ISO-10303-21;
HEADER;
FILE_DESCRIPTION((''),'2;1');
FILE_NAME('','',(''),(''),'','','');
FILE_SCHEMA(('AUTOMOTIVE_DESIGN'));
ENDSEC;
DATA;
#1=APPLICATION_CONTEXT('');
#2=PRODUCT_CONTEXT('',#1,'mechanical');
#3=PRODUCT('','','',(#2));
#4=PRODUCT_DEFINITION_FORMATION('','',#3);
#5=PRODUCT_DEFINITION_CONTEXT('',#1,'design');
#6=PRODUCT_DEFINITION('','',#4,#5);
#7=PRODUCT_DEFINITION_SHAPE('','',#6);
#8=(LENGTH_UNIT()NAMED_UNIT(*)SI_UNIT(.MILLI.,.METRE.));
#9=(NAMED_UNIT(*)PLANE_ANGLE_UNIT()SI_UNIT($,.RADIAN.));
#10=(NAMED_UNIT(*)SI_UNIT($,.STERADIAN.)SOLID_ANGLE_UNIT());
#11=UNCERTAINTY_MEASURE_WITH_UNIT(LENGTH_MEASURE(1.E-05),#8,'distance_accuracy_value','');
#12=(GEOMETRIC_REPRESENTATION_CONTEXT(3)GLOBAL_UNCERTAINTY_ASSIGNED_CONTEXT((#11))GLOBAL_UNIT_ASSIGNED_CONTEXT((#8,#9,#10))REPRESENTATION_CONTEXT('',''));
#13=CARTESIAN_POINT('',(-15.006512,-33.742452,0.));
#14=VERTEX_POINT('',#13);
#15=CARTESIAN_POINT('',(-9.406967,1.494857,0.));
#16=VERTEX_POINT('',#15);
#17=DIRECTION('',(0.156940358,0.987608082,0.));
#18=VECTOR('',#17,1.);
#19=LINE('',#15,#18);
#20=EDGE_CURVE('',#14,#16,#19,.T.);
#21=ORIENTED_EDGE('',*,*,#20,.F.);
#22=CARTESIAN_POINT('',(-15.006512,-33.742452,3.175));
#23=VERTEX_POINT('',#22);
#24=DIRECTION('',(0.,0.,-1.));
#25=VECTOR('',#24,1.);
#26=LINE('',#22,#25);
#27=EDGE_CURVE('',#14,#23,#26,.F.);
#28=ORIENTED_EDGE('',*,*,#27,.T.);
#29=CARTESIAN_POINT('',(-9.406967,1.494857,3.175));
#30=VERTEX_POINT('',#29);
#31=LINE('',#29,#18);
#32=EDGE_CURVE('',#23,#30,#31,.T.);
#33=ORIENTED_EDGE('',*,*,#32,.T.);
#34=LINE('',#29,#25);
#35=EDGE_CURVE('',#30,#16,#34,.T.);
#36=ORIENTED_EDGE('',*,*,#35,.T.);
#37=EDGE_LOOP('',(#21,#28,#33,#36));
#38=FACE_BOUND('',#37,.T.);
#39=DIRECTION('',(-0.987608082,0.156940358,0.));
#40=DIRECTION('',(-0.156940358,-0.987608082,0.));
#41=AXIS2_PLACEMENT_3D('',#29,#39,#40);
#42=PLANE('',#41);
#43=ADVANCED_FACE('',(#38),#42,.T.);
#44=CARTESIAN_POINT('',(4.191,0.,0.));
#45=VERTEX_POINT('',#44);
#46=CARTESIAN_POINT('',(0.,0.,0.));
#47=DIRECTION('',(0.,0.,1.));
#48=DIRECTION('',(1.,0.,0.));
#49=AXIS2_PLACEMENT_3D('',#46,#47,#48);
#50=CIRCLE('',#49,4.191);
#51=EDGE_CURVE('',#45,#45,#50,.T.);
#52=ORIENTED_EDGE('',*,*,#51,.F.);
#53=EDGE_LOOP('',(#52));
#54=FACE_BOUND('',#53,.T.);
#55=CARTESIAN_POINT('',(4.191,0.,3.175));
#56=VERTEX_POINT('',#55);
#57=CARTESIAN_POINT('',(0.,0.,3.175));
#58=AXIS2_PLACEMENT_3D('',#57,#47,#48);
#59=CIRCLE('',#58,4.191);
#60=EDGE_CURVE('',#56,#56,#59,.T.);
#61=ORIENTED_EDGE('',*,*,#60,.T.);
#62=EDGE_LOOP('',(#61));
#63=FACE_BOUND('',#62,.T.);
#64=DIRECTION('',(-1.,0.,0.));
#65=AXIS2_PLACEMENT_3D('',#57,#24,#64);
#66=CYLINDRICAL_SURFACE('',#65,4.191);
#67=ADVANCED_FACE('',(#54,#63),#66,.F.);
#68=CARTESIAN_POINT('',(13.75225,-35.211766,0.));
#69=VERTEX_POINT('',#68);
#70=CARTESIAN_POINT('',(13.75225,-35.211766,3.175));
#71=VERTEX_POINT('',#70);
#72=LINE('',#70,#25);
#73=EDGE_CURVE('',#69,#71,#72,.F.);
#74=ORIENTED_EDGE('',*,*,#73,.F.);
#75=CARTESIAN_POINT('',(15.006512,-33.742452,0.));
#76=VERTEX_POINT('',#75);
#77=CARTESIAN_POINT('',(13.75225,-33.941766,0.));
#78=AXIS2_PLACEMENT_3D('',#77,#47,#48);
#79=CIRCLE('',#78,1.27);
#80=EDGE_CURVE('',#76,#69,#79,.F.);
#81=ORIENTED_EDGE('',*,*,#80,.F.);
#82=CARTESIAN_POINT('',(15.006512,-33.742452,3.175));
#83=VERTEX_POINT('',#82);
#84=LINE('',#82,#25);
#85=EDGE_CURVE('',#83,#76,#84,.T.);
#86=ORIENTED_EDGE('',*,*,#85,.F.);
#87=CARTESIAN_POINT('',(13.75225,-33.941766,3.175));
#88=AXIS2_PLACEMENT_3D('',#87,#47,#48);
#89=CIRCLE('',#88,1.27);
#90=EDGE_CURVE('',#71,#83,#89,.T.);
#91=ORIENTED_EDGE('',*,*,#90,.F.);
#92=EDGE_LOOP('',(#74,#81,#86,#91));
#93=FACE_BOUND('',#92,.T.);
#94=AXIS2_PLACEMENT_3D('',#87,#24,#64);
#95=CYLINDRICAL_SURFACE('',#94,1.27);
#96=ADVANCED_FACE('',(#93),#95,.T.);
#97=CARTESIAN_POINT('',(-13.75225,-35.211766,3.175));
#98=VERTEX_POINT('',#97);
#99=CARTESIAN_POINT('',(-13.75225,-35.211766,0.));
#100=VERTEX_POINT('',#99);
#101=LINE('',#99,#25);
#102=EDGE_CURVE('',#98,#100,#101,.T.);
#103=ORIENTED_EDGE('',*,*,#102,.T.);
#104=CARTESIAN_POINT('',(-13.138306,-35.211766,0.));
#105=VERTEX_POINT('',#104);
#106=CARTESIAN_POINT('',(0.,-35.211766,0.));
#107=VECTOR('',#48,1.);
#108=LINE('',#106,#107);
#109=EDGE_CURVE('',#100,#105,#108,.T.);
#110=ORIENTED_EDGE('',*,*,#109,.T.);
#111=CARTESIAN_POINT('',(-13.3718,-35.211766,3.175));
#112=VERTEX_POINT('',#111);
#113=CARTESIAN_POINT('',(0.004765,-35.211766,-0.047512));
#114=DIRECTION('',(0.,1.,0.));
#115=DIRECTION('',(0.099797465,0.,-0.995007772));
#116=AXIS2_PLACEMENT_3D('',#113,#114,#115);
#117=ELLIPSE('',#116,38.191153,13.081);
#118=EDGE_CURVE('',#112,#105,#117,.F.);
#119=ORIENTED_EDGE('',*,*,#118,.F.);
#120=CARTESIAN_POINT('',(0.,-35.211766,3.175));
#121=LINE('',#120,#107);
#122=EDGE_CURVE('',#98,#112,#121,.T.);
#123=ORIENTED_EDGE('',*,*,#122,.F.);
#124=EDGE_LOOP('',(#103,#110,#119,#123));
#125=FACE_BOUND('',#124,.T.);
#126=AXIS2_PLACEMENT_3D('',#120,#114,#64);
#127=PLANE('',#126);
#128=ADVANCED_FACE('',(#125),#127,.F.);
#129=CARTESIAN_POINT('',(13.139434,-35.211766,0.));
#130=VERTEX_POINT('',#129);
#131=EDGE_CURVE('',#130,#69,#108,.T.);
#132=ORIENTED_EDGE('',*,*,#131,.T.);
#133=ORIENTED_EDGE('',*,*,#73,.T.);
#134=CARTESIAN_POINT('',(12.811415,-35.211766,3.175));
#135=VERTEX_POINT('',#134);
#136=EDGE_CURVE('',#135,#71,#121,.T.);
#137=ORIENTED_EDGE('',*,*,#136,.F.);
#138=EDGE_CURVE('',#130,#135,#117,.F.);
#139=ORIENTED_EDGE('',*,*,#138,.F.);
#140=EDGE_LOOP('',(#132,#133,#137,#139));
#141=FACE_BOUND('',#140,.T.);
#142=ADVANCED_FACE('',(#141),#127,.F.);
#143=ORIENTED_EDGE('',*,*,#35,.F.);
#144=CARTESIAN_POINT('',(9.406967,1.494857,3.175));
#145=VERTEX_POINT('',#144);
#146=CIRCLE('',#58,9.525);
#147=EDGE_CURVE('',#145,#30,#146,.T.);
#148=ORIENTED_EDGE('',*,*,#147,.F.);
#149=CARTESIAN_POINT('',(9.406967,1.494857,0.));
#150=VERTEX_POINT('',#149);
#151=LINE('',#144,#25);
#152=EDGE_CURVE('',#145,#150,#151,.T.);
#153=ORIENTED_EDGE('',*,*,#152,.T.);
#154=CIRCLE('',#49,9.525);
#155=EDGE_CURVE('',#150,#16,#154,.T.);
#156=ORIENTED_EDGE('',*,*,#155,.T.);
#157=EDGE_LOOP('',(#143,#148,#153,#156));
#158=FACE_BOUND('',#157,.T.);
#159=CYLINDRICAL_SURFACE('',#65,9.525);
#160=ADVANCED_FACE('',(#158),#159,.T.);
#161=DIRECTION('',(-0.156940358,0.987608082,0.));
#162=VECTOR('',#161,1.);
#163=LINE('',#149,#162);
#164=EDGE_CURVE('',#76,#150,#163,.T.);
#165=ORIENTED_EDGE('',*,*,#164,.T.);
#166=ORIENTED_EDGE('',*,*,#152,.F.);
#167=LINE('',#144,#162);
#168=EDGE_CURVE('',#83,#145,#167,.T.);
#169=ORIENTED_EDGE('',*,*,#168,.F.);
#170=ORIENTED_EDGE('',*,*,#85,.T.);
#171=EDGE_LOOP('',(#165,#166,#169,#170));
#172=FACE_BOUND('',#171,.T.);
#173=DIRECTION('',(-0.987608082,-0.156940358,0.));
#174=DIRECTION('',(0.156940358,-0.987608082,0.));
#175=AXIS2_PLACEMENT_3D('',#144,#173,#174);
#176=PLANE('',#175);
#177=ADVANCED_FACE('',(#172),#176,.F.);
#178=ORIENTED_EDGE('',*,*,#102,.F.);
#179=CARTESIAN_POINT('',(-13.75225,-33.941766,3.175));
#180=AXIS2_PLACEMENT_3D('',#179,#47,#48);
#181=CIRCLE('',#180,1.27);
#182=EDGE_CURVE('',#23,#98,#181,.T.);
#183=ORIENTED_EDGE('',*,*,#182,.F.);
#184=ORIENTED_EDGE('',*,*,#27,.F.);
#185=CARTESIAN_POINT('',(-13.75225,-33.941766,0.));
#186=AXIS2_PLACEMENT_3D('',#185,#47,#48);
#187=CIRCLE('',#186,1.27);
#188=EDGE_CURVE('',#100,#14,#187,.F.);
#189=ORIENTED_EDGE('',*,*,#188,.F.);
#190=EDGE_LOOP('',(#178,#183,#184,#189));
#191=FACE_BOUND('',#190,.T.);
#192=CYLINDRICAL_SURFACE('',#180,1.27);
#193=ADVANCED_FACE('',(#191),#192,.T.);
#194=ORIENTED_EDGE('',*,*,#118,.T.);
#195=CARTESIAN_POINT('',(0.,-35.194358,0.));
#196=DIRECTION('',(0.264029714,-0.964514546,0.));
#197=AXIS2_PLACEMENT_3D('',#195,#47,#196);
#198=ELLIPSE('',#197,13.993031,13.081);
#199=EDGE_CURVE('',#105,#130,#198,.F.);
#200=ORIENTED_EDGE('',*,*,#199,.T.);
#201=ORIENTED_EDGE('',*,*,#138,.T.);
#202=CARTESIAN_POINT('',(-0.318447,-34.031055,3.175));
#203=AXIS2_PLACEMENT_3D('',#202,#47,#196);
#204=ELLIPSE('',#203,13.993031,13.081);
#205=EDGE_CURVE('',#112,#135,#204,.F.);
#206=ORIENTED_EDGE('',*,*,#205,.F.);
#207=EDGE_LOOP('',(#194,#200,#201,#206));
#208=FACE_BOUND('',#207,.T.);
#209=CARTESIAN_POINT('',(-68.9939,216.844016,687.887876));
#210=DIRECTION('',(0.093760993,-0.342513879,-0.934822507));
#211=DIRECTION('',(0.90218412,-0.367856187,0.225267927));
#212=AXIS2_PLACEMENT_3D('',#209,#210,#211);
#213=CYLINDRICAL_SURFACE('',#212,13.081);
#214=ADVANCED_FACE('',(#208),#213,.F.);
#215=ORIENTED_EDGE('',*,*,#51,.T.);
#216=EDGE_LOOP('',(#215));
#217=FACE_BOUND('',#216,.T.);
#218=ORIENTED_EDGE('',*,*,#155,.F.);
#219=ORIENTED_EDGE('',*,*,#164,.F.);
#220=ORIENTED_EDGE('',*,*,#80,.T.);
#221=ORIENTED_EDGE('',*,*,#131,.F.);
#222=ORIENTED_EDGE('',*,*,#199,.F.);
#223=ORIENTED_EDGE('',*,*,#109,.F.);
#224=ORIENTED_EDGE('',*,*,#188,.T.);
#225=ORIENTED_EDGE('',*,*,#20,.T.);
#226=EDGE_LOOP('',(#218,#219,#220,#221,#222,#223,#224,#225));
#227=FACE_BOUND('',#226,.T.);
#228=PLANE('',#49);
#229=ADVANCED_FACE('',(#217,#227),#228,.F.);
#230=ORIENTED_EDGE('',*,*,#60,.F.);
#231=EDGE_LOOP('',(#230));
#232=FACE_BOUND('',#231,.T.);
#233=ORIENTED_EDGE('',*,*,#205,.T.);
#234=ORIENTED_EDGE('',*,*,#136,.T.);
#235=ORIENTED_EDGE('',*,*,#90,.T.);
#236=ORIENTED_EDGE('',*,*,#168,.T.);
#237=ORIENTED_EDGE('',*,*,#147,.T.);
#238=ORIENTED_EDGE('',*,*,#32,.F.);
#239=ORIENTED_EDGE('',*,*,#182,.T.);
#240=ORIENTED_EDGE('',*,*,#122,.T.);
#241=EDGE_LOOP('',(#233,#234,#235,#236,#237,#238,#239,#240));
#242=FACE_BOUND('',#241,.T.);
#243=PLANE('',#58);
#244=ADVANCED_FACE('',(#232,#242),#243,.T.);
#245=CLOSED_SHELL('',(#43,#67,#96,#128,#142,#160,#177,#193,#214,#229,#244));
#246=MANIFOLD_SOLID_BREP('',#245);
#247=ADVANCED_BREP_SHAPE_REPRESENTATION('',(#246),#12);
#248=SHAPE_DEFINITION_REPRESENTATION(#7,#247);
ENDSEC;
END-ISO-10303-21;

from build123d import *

# Parameters (mm, degrees)
SKETCH1_R           = 4.191
BOSS_EXTRUDE1_DEPTH = 3.175
CAVITY1_START       = 3.689049998
CAVITY1_DEPTH       = 9.603434939
FILLET3_R           = 1.27


# Read off the part's stored shape, not the designer's step: Cavity1
with BuildPart() as part:
    # Sketch1 → Boss-Extrude1 (new body)
    with BuildSketch(Plane.XY):
        with BuildLine():
            ThreePointArc((9.406966983, 1.494856913), (0, 9.525), (-9.406966983, 1.494856913))
            Line((-9.406966983, 1.494856913), (-15.24, -35.211766))
            Line((-15.24, -35.211766), (15.24, -35.211766))
            Line((15.24, -35.211766), (9.406966983, 1.494856913))
        make_face()
        Circle(SKETCH1_R, mode=Mode.SUBTRACT)
    extrude(amount=BOSS_EXTRUDE1_DEPTH)

    # Cavity1 outline → Cavity1 (cut)
    with BuildSketch(Plane(origin=(0, 0, 0), x_dir=(0.9955947349362284, 0.032256539947670526, 0.08803771576924041), z_dir=(0.09376099278090663, -0.3425138790307331, -0.9348225066311033)).offset(CAVITY1_START)):
        with BuildLine():
            Line((-14.012226084, 36), (-14.169183947, 34.154693399))
            ThreePointArc((-14.169183947, 34.154693399), (-1.135248211, 19.965054491), (11.898687525, 34.154693399))
            Line((11.898687525, 34.154693399), (11.741729662, 36))
            Line((11.741729662, 36), (-14.012226084, 36))
        make_face()
    extrude(amount=CAVITY1_DEPTH, mode=Mode.SUBTRACT)

    # Fillet3
    fillet3_edges = [part.edges().sort_by_distance(p)[0] for p in [
        (-15.24, -35.211766, 1.5875),
        (15.24, -35.211766, 1.5875),
    ]]
    fillet(fillet3_edges, radius=FILLET3_R)


solid = part.part
